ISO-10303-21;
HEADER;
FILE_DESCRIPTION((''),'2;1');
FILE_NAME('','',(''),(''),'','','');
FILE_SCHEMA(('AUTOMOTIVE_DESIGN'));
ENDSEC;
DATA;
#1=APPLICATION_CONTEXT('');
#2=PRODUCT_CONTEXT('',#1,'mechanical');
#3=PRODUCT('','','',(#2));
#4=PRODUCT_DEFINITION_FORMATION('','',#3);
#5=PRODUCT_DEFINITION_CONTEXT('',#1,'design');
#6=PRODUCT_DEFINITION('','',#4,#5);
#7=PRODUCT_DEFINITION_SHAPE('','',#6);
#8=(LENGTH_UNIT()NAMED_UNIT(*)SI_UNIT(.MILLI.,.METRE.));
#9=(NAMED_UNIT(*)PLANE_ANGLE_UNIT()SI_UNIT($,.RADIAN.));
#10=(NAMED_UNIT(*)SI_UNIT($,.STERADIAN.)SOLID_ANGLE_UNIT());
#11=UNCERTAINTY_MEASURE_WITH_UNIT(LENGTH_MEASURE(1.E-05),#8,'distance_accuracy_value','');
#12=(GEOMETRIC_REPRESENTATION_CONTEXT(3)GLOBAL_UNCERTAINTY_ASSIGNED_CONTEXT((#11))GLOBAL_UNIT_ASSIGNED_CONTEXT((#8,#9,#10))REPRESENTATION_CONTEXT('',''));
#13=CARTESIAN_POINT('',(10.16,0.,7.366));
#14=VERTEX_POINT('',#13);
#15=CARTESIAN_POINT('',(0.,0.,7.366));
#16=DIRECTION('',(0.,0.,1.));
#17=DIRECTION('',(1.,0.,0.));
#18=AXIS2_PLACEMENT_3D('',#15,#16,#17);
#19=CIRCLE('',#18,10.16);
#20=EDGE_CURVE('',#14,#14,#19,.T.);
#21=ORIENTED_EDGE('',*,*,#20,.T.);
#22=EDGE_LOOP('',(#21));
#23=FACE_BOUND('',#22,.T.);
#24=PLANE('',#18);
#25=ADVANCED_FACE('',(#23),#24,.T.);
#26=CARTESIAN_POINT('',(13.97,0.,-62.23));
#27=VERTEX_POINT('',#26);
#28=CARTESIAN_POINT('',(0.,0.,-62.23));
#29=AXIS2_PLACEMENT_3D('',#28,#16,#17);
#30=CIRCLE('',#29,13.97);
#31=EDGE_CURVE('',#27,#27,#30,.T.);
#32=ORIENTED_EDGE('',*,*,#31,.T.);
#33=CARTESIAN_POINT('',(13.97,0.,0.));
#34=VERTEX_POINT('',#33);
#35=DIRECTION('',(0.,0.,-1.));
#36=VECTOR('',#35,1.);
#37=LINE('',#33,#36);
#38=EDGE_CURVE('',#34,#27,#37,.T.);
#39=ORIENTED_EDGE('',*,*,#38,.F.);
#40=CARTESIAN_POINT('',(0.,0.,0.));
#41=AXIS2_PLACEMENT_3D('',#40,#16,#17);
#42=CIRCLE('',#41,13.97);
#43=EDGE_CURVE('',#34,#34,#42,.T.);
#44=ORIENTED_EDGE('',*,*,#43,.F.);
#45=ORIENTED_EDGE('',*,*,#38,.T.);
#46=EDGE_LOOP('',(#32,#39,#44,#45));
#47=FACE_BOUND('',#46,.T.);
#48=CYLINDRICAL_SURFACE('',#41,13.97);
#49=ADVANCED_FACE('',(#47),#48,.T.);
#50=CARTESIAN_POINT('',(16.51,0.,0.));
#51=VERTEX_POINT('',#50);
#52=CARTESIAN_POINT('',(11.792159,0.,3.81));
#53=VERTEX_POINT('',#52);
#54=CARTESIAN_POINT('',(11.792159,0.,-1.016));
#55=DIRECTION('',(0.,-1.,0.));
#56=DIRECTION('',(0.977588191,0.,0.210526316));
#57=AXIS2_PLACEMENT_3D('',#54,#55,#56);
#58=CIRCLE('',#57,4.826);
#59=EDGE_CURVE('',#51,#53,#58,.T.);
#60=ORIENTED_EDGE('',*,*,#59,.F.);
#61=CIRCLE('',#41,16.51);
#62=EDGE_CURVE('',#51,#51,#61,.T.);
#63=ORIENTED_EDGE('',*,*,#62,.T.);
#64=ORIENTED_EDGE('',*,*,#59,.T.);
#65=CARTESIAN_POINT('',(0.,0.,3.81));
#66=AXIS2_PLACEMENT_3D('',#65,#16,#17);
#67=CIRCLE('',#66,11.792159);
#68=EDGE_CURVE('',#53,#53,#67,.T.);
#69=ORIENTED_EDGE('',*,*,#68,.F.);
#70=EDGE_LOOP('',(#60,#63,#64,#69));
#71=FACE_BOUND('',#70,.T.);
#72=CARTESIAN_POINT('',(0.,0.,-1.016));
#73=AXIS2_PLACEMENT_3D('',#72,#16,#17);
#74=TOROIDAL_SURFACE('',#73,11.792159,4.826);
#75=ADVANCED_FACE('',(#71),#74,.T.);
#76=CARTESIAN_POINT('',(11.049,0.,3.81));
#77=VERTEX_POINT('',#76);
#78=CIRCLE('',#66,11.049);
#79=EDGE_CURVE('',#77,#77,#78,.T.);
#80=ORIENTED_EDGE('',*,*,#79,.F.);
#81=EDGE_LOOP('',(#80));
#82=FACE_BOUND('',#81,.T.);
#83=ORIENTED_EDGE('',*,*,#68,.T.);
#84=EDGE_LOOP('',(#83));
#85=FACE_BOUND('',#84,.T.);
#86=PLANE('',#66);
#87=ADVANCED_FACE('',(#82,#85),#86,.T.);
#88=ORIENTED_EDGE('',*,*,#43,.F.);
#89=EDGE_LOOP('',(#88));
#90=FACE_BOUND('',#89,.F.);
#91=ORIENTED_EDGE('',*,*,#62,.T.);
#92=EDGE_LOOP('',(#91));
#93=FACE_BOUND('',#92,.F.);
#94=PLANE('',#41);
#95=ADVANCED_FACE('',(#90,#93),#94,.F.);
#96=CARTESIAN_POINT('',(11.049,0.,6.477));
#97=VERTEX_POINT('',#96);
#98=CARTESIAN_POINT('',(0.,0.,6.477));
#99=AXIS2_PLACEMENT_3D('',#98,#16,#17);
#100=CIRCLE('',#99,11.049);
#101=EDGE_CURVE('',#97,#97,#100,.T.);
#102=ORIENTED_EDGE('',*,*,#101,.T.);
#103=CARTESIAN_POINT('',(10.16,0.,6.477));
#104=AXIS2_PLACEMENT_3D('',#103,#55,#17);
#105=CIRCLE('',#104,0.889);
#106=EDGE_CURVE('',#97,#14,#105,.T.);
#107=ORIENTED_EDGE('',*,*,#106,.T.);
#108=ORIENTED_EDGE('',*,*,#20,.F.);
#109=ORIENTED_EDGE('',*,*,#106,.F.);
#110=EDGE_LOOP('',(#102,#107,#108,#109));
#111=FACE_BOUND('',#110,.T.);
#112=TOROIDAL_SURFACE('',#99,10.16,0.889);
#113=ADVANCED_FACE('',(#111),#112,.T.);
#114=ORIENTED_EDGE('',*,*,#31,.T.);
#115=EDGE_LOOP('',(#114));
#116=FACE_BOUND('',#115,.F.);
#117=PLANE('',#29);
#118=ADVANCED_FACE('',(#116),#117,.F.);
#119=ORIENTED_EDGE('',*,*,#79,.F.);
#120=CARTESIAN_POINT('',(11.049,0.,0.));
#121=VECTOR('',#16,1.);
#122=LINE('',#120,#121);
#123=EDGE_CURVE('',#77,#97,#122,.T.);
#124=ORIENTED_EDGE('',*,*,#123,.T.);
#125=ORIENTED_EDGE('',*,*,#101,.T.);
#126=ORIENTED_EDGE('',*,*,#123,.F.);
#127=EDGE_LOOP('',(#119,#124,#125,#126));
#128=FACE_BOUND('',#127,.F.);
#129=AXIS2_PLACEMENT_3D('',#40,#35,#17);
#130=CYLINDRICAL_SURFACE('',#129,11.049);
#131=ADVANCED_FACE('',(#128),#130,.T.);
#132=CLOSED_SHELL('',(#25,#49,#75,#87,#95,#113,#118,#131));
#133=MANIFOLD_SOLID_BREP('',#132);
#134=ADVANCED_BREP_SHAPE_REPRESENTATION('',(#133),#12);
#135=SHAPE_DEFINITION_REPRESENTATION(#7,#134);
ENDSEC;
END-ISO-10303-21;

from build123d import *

# Parameters (mm, degrees)
F0_R     = 16.51
F0_R_2   = 11.049
F1_DEPTH = 3.81
F2_DEPTH = 7.366
F4_R     = 0.889
F5_R     = 13.97
F5_R_2   = 11.049
F6_DEPTH = 62.23


# Not quite as in the source:
# - a fillet or chamfer that OpenCascade refuses, or shapes differently, is made with other operations: its cross-section is extruded or revolved along the edge and cut away or added


with BuildPart() as f1:
    # F0 (on Top) → F1 (new body)
    with BuildSketch(Plane.XY):
        Circle(F0_R)
        Circle(F0_R_2, mode=Mode.SUBTRACT)
    extrude(amount=F1_DEPTH)

    # F0 (on Top) → F2 (join)
    with BuildSketch(Plane.XY):
        Circle(F0_R_2)
    extrude(amount=F2_DEPTH)

    # F3: fillet of radius 4.826 on 1 edges, made by hand

    # F3_s1 → F3_t2 (revolve, cut)
    with BuildSketch(Plane.XZ):
        with BuildLine():
            ThreePointArc((16.51, 0), (14.8242428344, 2.7385633568), (11.7921593923, 3.81))
            Line((11.7921593923, 3.81), (16.51, 3.81))
            Line((16.51, 3.81), (16.51, 0))
        make_face()
    revolve(axis=Axis((0, 0, 3.81), (0, 0, 1)), mode=Mode.SUBTRACT)

    # F4
    f4_edges = [f1.edges().sort_by_distance(p)[0] for p in [
        (-11.049, 0, 7.366),
    ]]
    fillet(f4_edges, radius=F4_R)

    # F5 (on face) → F6 (join)
    with BuildSketch(Plane.XY):
        Circle(F5_R)
        Circle(F5_R_2, mode=Mode.SUBTRACT)
        Circle(F5_R_2)
    extrude(amount=-F6_DEPTH)


solid = f1.part
